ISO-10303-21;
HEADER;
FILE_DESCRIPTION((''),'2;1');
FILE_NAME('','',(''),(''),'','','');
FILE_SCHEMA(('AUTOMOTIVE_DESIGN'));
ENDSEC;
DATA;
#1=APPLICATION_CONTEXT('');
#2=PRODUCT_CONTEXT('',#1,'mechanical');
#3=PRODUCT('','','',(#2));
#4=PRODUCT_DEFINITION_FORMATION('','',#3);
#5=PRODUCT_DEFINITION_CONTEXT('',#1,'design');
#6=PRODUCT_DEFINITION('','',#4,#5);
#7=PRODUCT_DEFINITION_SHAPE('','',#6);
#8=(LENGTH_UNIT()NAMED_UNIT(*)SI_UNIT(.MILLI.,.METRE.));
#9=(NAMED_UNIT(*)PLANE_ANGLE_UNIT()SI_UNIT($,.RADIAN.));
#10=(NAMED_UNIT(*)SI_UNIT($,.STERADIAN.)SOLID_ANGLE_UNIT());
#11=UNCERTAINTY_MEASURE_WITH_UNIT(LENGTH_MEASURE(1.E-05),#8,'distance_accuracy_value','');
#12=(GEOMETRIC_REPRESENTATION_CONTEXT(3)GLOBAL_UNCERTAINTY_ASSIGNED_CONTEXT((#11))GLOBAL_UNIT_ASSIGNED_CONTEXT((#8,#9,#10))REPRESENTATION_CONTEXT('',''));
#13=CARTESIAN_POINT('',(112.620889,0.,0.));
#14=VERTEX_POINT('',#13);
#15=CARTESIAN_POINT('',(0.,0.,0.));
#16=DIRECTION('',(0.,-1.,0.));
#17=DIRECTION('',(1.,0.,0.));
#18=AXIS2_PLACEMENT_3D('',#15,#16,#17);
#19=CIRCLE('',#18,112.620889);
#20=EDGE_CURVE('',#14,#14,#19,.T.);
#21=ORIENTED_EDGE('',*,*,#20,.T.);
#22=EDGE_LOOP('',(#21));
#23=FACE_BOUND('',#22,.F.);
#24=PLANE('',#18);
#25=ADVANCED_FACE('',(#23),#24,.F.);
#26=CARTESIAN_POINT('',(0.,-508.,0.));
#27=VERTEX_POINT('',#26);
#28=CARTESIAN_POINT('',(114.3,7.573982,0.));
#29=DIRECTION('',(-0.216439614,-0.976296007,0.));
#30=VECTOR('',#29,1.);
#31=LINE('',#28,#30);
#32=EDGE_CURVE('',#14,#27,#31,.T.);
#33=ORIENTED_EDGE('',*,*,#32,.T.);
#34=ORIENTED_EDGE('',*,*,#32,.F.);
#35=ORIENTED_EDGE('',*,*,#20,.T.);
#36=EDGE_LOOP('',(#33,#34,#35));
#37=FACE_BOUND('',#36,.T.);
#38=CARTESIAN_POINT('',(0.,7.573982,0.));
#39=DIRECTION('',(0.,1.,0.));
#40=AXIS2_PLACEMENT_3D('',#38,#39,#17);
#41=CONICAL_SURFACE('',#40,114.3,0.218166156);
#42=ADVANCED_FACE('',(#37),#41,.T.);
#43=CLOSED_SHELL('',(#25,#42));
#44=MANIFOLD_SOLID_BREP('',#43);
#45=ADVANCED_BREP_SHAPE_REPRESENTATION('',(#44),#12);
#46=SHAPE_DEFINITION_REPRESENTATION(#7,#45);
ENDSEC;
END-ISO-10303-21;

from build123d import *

# Parameters (mm, degrees)
F0_R     = 114.3
F1_DEPTH = 508


# Not quite as in the source:
# - a fillet or chamfer that OpenCascade refuses, or shapes differently, is made with other operations: its cross-section is extruded or revolved along the edge and cut away or added


with BuildPart() as f1:
    # F0 (on Front) → F1 (new body)
    with BuildSketch(Plane.XZ):
        Circle(F0_R)
    extrude(amount=F1_DEPTH)

    # F2: chamfer of 114.3 x 515.5739819686 on 1 edges, made by hand

    # F2_s1 → F2_t2 (revolve, cut)
    with BuildSketch(Plane.XY):
        Polygon((114.3, 7.5739819686), (0, -508), (114.3, -508), align=None)
    revolve(axis=Axis((0, -508, 0), (0, -1, 0)), mode=Mode.SUBTRACT)


solid = f1.part
